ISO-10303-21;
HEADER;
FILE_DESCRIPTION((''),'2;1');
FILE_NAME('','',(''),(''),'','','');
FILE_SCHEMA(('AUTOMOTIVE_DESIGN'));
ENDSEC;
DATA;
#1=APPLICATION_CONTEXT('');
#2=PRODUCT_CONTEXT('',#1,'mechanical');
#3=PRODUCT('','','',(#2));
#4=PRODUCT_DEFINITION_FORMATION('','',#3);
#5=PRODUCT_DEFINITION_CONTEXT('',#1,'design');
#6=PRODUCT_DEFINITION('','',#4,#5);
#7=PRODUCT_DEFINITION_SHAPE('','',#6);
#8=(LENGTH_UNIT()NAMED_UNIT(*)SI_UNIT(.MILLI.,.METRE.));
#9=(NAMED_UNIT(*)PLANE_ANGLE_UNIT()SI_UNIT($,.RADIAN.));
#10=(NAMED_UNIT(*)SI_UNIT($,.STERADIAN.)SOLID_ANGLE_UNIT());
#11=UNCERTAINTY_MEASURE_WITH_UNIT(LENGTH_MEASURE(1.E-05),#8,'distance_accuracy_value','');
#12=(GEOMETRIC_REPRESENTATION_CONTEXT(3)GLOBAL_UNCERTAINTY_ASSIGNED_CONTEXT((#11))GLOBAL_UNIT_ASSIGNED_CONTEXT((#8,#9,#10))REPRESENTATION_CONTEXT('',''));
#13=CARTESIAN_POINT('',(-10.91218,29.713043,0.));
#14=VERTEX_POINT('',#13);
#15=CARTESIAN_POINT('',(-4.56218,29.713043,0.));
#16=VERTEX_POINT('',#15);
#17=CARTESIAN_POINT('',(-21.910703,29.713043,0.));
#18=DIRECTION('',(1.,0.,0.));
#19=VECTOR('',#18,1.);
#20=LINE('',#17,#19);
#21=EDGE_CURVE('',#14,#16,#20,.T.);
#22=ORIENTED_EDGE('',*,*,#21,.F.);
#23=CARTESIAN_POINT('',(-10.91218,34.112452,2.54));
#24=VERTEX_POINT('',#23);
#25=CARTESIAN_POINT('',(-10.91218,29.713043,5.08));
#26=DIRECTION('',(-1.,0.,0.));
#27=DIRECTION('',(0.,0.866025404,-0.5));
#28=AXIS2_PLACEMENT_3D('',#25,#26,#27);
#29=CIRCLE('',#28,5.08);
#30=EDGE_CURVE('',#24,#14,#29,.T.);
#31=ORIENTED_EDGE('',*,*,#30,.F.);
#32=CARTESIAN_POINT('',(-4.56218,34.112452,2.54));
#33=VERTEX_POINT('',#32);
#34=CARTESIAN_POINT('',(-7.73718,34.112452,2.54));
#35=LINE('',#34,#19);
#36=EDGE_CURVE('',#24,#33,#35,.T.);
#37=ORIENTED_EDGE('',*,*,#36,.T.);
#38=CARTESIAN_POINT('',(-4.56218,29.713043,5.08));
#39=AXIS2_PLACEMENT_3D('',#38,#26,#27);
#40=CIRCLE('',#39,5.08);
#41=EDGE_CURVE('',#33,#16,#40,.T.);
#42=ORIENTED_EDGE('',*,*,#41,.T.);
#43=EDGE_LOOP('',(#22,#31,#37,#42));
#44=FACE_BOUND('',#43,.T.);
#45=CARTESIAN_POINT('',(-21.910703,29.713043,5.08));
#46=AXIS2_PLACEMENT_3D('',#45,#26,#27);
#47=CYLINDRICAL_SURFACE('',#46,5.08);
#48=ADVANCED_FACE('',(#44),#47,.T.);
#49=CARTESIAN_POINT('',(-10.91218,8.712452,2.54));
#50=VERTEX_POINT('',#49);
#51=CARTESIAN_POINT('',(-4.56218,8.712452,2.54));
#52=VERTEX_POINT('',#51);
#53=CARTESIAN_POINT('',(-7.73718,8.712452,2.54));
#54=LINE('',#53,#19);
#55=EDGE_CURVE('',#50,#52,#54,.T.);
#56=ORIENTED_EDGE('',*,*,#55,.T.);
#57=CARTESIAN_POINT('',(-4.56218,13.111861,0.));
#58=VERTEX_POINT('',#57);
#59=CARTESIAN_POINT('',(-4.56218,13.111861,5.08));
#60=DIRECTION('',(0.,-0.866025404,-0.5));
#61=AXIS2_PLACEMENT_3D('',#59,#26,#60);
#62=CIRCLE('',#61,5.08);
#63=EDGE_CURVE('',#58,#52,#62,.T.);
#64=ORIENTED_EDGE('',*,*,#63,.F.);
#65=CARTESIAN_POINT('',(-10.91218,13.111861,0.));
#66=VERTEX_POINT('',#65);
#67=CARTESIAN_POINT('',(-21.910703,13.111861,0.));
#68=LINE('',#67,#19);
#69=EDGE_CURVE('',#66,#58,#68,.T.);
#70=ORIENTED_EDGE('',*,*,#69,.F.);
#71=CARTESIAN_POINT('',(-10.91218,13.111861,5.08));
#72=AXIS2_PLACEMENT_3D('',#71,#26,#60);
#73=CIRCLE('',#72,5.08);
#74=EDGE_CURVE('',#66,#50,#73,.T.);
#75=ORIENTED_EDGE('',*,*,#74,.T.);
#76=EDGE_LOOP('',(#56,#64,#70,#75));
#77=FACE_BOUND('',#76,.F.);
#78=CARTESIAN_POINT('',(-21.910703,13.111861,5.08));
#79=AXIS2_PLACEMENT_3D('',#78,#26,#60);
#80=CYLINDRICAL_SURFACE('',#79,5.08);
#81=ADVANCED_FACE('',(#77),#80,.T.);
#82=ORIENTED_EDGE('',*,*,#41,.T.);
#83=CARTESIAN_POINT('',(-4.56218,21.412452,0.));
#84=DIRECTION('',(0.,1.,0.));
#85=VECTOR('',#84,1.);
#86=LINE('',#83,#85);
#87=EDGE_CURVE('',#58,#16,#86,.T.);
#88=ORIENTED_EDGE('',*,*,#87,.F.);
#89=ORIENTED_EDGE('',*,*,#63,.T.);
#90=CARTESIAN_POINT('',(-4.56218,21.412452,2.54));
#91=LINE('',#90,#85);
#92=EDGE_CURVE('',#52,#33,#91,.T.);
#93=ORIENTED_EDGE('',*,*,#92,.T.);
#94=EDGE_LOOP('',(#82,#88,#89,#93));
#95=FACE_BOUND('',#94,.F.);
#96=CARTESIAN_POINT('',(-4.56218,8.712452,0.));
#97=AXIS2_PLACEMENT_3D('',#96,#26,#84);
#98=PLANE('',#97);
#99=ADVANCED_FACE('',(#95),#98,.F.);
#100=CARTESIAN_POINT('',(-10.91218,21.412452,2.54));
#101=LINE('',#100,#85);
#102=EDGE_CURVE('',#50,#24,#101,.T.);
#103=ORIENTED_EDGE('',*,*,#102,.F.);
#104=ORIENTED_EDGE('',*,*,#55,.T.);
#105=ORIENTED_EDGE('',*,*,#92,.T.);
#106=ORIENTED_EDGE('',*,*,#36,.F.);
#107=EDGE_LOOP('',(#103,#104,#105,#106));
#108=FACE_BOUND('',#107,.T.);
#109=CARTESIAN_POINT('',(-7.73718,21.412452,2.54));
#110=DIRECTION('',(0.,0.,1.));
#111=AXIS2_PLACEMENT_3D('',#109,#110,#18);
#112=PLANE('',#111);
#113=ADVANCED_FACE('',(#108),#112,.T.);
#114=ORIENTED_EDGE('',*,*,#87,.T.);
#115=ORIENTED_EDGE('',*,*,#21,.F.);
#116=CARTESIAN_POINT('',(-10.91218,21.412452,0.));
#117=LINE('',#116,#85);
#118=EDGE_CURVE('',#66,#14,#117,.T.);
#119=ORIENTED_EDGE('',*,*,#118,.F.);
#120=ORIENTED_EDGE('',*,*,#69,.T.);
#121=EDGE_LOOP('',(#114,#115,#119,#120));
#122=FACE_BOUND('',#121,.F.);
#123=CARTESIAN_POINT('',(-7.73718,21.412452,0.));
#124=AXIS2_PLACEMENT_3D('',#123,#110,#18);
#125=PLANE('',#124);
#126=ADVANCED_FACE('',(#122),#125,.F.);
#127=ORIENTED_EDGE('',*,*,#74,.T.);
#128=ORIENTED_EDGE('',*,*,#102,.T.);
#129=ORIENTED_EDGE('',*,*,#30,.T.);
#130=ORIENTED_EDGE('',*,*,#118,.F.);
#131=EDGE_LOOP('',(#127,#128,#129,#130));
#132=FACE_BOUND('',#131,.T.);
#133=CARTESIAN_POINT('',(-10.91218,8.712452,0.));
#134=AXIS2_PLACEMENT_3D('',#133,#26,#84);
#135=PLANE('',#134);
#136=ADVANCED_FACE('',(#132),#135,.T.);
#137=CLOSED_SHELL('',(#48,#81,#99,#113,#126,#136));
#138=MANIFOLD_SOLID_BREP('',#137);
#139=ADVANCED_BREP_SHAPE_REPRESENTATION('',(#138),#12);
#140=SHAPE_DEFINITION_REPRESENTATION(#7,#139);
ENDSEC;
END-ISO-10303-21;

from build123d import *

# Parameters (mm, degrees)
F0_W        = 6.35
F0_H        = 25.4
F1_DEPTH    = 2.54
F2_T1_DEPTH = 28.3470452561


# Not quite as in the source:
# - a fillet or chamfer that OpenCascade refuses, or shapes differently, is made with other operations: its cross-section is extruded or revolved along the edge and cut away or added


with BuildPart() as f1:
    # F0 (on Top) → F1 (new body)
    with BuildSketch(Plane.XY):
        with Locations((-7.7371799469, 21.412451905)):
            Rectangle(F0_W, F0_H)
    extrude(amount=F1_DEPTH)

    # F2: fillet of radius 5.08 on 2 edges, made by hand

    # F2_s2 → F2_t1 (cut)
    with BuildSketch(Plane.YZ.offset(-21.910702575)):
        with BuildLine():
            ThreePointArc((8.712451905, 2.54), (10.5718609562, 0.6805909488), (13.1118609562, 0))
            Line((13.1118609562, 0), (8.712451905, 0))
            Line((8.712451905, 0), (8.712451905, 2.54))
        make_face()
        with BuildLine():
            ThreePointArc((34.112451905, 2.54), (32.2530428538, 0.6805909488), (29.7130428538, 0))
            Line((29.7130428538, 0), (34.112451905, 0))
            Line((34.112451905, 0), (34.112451905, 2.54))
        make_face()
    extrude(amount=F2_T1_DEPTH, mode=Mode.SUBTRACT)


solid = f1.part
